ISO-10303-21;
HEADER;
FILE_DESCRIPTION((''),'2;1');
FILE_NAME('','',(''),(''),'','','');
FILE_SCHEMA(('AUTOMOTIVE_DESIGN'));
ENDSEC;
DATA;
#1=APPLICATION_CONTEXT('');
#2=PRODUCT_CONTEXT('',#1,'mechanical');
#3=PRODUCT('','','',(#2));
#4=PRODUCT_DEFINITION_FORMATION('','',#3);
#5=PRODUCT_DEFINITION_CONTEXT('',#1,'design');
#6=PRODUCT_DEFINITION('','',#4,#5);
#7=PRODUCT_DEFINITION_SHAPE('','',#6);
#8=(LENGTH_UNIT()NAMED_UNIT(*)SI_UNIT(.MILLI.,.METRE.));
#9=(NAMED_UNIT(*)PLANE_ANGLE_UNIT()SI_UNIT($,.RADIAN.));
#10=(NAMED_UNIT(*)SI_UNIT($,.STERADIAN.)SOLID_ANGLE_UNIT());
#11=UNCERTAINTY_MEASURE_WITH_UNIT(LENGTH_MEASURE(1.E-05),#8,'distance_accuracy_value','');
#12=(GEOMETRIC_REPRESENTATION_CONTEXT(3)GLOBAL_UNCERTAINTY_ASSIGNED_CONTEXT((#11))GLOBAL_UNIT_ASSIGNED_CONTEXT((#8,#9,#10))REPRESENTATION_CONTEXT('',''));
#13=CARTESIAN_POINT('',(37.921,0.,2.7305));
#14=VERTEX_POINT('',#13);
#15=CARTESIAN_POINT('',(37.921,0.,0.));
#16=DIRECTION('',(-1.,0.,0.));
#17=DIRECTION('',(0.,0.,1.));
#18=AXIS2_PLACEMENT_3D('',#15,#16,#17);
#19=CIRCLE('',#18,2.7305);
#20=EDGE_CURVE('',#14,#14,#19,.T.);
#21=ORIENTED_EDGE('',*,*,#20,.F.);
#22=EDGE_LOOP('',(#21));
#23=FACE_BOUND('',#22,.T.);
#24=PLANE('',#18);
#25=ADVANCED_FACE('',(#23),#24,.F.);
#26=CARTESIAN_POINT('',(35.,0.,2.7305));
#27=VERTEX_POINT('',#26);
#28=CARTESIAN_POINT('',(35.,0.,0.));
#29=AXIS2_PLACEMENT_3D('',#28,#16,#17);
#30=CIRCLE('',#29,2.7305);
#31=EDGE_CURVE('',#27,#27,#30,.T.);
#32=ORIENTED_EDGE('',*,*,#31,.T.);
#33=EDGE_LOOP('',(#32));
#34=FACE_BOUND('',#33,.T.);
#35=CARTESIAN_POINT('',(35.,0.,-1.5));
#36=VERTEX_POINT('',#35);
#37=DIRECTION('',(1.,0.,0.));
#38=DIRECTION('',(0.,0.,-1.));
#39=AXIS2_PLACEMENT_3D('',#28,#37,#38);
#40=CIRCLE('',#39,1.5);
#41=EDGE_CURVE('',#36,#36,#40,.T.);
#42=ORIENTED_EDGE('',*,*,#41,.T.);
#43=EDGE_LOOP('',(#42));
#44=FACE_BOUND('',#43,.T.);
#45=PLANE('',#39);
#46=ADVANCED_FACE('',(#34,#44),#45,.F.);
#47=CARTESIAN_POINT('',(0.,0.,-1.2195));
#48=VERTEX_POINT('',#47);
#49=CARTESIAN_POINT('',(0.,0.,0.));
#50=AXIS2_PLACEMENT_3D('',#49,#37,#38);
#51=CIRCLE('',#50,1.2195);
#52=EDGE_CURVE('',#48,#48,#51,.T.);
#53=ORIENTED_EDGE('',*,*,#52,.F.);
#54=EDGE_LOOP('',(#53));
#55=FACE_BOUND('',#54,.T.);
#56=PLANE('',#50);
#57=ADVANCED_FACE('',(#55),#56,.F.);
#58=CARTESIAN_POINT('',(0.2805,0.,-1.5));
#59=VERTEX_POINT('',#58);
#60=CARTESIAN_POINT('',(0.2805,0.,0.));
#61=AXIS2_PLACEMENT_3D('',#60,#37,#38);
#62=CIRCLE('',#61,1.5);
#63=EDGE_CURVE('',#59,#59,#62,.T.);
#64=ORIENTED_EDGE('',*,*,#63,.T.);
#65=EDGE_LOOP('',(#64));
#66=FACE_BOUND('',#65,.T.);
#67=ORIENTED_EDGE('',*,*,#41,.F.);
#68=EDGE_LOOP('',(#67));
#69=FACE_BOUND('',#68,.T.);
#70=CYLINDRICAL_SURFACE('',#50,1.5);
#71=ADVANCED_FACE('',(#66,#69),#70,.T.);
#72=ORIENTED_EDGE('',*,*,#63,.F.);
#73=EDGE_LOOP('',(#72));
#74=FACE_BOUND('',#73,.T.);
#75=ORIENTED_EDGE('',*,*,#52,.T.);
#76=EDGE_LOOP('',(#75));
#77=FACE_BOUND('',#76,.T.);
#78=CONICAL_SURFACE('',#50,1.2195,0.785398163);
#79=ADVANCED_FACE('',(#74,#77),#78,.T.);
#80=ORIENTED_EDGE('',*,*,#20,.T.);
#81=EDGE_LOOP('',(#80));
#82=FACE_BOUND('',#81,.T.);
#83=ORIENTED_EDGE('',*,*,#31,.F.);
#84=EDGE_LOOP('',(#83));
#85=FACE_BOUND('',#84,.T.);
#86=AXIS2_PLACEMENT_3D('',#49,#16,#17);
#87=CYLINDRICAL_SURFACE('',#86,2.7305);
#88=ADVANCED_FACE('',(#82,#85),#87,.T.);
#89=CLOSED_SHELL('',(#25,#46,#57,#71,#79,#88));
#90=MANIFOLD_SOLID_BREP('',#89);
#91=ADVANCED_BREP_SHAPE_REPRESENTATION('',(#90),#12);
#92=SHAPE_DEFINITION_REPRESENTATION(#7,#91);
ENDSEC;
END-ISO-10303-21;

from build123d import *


# Read off the part's stored shape, not the designer's step: M3x0.5 Machine Threads Stud1
with BuildPart() as part:
    # Sketch1 → Revolve1 (revolve)
    with BuildSketch(Plane(origin=(0, 0, 0), x_dir=(-1, 0, 0), z_dir=(0, 1, 0))):
        Polygon((0, 1.524), (0, 0), (-37.921000104, 0), (-37.921000104, 2.7305), (-35.000000104, 2.7305), (-35.000000104, 1.524), align=None)
    revolve(axis=Axis((0, 0, 0), (1, 0, 0)))

    # M3x0.5 Machine Threads Stud1 outline → M3x0.5 Machine Threads Stud1 (revolve, cut)
    with BuildSketch(Plane.YX):
        Polygon((1.524, 35.000000104), (1.5, 35.000000104), (1.5, 0.2805), (1.2195, 0), (1.524, 0), align=None)
    revolve(axis=Axis((0, 0, 0), (1, 0, 0)), mode=Mode.SUBTRACT)


solid = part.part
